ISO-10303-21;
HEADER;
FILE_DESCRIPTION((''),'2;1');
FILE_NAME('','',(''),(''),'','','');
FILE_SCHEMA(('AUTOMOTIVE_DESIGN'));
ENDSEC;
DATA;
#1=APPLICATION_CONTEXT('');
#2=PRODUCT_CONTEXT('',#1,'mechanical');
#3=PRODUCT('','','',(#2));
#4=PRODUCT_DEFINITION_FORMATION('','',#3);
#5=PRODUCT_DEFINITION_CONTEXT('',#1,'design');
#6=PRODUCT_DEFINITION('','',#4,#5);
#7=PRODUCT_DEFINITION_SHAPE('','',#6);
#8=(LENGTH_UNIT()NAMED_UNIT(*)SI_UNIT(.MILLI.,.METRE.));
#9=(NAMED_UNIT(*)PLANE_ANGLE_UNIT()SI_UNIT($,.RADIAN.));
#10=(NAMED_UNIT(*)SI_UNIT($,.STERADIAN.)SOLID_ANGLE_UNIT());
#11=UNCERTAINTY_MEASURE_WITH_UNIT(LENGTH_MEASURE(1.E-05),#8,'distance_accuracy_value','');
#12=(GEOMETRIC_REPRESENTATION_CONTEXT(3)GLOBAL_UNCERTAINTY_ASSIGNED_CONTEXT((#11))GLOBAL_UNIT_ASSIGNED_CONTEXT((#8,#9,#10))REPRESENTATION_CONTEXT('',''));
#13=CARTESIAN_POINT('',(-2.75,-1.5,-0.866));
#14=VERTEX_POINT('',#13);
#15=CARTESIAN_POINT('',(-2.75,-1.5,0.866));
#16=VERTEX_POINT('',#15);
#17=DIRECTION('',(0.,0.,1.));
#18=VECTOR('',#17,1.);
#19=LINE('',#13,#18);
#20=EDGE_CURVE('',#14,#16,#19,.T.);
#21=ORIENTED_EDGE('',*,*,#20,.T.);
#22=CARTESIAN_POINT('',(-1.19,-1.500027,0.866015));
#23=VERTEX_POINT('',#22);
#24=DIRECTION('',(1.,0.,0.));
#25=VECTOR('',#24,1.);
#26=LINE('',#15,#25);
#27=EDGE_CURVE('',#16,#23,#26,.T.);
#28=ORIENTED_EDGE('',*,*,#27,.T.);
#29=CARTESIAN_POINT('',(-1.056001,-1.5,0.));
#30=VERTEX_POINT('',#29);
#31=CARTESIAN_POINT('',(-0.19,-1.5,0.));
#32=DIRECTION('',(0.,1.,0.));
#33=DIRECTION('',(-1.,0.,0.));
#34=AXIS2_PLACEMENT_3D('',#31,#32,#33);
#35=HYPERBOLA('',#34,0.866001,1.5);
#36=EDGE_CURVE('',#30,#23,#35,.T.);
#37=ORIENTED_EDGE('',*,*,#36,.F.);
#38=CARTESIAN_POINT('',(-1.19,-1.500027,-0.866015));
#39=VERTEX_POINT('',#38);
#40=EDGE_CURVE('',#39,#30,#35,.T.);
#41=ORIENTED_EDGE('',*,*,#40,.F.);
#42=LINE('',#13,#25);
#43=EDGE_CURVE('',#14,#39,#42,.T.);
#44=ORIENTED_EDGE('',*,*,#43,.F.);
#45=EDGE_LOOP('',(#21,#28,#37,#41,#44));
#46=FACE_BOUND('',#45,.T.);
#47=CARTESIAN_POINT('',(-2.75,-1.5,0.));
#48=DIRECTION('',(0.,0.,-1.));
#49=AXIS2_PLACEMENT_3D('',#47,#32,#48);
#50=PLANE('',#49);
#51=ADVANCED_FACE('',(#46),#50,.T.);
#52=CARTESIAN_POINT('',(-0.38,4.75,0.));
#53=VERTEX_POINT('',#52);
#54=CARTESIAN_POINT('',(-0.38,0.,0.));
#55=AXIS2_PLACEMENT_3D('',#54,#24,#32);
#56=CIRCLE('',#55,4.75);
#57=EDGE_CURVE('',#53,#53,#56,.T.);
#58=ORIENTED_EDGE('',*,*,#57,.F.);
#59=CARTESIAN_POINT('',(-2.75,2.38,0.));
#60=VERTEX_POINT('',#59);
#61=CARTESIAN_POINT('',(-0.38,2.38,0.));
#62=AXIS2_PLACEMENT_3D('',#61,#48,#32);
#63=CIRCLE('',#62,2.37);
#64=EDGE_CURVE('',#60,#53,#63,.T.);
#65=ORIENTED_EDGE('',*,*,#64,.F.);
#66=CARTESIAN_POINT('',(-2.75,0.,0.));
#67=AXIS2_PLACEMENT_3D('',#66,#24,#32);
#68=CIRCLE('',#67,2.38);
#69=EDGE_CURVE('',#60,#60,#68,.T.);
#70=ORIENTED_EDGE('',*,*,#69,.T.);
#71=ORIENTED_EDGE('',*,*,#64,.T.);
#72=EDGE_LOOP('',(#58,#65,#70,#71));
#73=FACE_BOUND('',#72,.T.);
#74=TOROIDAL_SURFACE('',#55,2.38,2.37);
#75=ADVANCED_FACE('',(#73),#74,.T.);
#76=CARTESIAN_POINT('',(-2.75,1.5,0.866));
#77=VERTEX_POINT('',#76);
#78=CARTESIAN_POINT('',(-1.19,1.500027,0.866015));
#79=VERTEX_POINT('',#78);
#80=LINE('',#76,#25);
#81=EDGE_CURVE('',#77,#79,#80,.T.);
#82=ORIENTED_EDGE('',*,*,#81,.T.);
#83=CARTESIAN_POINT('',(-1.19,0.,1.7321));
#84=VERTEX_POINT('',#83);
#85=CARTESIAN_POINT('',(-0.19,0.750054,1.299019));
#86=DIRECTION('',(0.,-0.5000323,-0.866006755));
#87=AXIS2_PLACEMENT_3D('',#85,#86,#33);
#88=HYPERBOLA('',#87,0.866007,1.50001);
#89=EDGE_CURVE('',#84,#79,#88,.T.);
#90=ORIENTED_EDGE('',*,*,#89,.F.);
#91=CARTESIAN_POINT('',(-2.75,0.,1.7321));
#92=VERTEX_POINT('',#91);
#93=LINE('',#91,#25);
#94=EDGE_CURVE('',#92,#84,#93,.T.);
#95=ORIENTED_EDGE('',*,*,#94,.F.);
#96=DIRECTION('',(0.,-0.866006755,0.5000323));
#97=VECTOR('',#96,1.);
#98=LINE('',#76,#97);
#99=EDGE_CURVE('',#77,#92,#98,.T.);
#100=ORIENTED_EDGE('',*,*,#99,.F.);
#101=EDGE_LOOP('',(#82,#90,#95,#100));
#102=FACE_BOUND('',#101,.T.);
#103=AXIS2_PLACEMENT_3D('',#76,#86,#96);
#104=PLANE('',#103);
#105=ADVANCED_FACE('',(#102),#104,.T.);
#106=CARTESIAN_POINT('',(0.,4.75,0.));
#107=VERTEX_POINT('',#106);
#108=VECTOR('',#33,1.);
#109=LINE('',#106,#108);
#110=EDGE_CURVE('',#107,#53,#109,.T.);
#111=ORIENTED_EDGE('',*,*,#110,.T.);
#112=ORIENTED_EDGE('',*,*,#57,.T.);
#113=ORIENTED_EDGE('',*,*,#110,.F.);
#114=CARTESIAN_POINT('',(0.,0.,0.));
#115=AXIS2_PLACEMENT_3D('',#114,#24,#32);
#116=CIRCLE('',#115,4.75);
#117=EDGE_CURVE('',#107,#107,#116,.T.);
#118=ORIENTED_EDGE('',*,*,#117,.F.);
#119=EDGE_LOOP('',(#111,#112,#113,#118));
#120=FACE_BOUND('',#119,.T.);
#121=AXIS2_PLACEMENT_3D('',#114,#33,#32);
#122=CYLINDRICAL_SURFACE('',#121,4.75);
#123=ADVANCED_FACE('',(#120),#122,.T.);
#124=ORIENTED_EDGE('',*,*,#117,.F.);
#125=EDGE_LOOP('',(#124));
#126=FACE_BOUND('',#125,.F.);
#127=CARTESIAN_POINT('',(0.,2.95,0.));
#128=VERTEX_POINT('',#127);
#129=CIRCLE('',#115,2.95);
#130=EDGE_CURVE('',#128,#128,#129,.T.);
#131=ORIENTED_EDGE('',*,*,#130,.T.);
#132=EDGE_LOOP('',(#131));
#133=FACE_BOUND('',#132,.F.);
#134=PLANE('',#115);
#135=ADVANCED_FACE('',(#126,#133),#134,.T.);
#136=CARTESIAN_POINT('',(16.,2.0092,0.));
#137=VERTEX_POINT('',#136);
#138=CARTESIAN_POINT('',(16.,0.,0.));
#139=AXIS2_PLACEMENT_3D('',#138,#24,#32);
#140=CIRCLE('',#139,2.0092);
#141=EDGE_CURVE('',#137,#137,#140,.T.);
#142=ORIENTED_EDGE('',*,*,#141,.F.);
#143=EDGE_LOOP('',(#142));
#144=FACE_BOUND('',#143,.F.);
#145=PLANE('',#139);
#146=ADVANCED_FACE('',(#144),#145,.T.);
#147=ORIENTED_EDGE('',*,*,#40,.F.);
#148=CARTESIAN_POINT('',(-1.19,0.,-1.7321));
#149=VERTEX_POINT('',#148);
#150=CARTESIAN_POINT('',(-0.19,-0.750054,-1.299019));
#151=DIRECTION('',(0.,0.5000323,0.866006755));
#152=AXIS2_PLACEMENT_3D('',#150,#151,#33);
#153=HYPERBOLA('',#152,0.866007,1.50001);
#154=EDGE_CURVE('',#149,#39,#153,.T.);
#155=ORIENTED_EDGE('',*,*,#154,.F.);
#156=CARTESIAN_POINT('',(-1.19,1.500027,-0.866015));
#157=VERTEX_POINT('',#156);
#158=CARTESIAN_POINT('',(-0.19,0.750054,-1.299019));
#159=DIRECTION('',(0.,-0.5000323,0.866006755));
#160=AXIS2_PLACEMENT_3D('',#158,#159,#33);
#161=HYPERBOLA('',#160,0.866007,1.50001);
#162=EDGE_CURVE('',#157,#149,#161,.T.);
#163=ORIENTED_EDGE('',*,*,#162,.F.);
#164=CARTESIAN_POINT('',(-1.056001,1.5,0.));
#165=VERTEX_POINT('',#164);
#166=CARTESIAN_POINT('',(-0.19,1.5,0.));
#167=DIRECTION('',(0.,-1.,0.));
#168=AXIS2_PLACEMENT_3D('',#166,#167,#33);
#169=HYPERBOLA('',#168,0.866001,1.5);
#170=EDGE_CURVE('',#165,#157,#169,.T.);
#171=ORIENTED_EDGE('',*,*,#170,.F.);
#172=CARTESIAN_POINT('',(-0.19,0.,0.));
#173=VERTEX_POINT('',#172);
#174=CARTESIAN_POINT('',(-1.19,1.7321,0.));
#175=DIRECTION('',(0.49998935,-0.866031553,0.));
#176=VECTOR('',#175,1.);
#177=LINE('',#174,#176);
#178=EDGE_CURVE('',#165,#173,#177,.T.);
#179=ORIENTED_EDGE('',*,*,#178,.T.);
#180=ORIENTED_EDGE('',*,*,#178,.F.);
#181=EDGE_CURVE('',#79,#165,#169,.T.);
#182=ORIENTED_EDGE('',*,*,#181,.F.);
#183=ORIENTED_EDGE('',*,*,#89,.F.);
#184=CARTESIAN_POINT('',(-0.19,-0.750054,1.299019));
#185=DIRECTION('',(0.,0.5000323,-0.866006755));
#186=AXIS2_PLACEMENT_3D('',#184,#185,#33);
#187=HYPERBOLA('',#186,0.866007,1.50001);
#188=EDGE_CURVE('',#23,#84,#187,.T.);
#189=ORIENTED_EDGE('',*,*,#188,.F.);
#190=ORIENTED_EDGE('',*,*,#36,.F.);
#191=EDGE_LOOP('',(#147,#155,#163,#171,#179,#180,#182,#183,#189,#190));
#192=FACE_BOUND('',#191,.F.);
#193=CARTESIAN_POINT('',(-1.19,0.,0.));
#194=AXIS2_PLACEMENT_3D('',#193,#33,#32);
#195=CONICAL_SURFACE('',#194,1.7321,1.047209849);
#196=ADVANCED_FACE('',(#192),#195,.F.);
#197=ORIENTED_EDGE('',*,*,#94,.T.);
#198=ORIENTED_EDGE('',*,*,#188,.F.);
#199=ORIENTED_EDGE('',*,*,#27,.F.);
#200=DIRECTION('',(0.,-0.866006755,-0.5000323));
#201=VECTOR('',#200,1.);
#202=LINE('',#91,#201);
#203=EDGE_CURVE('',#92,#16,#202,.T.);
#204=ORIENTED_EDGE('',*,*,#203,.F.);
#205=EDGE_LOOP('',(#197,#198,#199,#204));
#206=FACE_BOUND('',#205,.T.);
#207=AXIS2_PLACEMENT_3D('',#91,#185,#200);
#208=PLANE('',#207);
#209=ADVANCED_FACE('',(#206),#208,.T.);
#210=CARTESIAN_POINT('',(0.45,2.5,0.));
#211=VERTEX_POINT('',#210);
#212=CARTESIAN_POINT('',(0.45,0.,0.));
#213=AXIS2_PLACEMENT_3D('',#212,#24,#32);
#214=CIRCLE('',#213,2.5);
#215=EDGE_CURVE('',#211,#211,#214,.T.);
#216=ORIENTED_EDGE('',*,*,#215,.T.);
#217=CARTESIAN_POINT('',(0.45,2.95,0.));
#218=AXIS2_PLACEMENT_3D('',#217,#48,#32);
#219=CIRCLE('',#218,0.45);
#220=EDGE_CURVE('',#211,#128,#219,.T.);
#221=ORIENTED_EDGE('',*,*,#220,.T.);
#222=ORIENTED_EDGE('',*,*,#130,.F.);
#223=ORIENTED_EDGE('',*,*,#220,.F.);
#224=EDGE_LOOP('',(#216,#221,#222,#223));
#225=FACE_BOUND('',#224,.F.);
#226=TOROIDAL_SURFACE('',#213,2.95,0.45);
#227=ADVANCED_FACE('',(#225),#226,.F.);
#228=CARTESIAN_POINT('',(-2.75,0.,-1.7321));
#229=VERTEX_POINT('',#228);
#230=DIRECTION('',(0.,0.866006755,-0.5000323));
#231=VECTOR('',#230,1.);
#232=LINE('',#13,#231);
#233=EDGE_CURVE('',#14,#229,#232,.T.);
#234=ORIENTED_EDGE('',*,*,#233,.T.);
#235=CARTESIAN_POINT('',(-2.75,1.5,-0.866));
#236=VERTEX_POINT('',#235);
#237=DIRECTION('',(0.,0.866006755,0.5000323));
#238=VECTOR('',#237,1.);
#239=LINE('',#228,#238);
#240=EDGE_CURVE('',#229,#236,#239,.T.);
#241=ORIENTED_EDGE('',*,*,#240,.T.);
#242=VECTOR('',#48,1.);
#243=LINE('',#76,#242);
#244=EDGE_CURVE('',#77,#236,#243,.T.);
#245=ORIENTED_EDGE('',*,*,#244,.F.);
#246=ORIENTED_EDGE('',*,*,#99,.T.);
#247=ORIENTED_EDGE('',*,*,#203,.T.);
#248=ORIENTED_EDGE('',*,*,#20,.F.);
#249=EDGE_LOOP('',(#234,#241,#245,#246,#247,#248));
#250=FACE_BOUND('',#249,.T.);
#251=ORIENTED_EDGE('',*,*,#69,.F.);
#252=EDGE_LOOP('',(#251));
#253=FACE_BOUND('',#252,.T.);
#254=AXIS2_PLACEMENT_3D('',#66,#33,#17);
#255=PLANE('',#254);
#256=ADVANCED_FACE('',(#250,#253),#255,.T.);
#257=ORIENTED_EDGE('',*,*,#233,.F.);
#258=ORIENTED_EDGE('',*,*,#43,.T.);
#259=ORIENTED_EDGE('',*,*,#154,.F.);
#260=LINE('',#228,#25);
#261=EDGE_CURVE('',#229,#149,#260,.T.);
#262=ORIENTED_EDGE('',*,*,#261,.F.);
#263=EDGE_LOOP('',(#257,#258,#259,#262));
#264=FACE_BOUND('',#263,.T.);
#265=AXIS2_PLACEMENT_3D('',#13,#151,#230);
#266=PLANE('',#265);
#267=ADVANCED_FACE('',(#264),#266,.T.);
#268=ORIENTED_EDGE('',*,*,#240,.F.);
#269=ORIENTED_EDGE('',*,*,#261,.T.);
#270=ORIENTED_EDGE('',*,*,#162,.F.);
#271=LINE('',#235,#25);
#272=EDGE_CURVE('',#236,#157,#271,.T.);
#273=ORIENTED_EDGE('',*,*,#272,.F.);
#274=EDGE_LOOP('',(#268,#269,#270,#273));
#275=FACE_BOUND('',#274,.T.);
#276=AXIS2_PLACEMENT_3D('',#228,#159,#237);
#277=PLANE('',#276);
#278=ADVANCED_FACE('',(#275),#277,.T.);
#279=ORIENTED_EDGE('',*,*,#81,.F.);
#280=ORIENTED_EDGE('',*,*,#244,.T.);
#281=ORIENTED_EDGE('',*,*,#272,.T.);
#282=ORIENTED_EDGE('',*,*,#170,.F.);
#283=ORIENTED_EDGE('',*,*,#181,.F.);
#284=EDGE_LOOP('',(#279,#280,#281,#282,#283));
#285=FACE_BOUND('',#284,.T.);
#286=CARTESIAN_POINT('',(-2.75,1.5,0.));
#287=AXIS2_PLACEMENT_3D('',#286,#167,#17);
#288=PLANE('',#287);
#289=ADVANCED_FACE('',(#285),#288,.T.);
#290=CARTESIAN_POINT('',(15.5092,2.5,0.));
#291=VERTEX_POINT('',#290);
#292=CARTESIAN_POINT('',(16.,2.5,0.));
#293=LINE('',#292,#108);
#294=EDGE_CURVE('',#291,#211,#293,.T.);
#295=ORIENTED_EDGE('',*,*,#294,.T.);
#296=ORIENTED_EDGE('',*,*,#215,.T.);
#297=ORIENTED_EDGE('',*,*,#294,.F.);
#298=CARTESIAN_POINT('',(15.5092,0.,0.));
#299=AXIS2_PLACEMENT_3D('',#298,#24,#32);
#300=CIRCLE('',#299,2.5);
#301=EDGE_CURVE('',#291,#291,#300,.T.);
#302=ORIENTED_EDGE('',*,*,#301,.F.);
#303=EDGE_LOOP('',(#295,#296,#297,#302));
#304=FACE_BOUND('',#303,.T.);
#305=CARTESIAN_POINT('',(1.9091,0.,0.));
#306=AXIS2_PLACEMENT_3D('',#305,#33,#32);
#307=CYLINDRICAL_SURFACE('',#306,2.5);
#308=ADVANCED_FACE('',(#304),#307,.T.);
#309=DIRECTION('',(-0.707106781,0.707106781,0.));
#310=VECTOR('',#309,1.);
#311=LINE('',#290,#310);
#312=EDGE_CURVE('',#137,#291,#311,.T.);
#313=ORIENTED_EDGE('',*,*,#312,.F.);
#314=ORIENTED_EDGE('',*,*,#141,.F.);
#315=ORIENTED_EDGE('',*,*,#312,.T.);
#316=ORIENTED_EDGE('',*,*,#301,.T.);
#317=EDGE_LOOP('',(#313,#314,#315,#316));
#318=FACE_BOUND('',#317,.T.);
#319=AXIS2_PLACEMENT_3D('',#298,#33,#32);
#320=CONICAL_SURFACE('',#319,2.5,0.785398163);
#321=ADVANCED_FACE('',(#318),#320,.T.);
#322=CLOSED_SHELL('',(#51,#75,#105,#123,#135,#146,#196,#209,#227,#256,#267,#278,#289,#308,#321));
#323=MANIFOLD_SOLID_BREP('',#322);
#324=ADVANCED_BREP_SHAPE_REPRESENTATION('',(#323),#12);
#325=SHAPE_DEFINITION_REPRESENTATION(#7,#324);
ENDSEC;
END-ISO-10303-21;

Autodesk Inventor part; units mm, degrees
ref_plane "YZ Plane" through (0, 0, 0) normal (1, 0, 0) x (0, 1, 0)
ref_plane "XZ Plane" through (0, 0, 0) normal (0, 1, 0) x (-1, 0, 0)
sketch "Sketch1" plane through (0, 0, 0) normal (0, 0, 1) x (1, 0, 0)
  line L0 (-0.19, 0) -> (16, 0)
  line L1 (16, 0) -> (16, 2.5)
  line L2 (16, 2.5) -> (2.4, 2.5)
  line L3 (2.4, 2.5) -> (1.9091, 2.5)
  line L4 (1.9091, 2.5) -> (0, 2.5)
  line L5 (0, 2.5) -> (0, 4.75)
  line L6 (0, 4.75) -> (-2.75, 4.75)
  line L7 (-2.75, 4.75) -> (-2.75, 1.7321)
  line L8 (-2.75, 1.7321) -> (-1.19, 1.7321)
  line L9 (-1.19, 1.7321) -> (-0.19, 0)
  line L10 (-6.5, 0) -> (19.75, 0) projected
  line L11 (0, -0.95) -> (0, 5.7) projected
  line L12 (2.4, 2.5) -> (0, 2.5) construction
  dimension "d1" = 13.6
  dimension "d2" = 0.4909
  dimension "d3" = 2.75
  dimension "d4" = 1.56
  dimension "d5" = 60
  dimension "d6" = 5
  dimension "d7" = 5
  dimension "d8" = 3.4641
  dimension "d9" = 9.5
  dimension "d26" = 16
revolve "Body" add sketch "Sketch1" angle 360 about axis through (-0.19, 0, 0) along (1, 0, 0)
sketch "Sketch2" plane through (-2.75, 0, 0) normal (-1, 0, 0) x (0, 0, 1)
  circle A0 centre (0, 0) radius 1.7321 projected
  line L0 (0, -6.65) -> (0, 6.65) projected
  line L1 (-6.65, 0) -> (6.65, 0) projected
  line L2 (1.7321, 0) -> (0.866, -1.5)
  line L3 (0.866, -1.5) -> (-0.866, -1.5)
  line L4 (-0.866, -1.5) -> (-1.7321, 0)
  line L5 (-1.7321, 0) -> (-0.866, 1.5)
  line L6 (-0.866, 1.5) -> (0.866, 1.5)
  line L7 (0.866, 1.5) -> (1.7321, 0)
extrude "Slot" add sketch "Sketch2" against normal up to next contours L7 A0 | A0 L2 | L6 L0 A0 | A0 L0 L3 | L0 L6 A0 | A0 L3 L0 | L4 A0 | A0 L5
fillet "Fillet1" radius 2.37 1 edges at (-2.75, -4.75, 0)
thread "Thread" size "M5x0.8" class "6g" standard "ISO Metric profile" length 13.6
chamfer "Chamfer1" distance 0.4908 distance2 0.4908 1 edges at (16, -2.5, 0) measured on face at (16, -1.1374, -1.1324)
ref_plane "Work Plane1" through (29, 0, 0) normal (0, -1, 0) x (1, 0, 0)
fillet "Fillet2" radius 0.45 1 edges at (0, -2.5, 0)
equation "\"d30\" = R"
equation "\"d17\" = RR"
equation "\"d13\" = GEL"
equation "\"d15\" = -0.5 * SPD + 0.5 * GD"
equation "\"d16\" = GUL"
equation "\"d1\" = GEL"
equation "\"d3\" = KOH"
equation "\"d4\" = INTI"
equation "\"d6\" = GD"
equation "\"d7\" = BDM"
equation "\"d8\" = 1.1547 * SW"
equation "\"d9\" = KOD"
equation "\"d26\" = NLG"
equation "\"GD\" = NND"
equation "\"NLG\" = 16"
equation "\"GEL\" = 13.6"
equation "\"KOD\" = 9.5"
equation "\"KOH\" = 2.75"
equation "\"INTI\" = 1.56"
equation "\"GAL\" = 0.61345 * PTC"
equation "\"GUL\" = 0.61345 * PTC"
equation "\"BDM\" = NND"
equation "\"SW\" = 3"
equation "\"RR\" = 2.37"
equation "\"SPD\" = NND - 1.2269 * PTC"
equation "\"R\" = 0.45"
equation "\"TOA\" = 30deg"
equation "\"GD1\" = THREADDIA - 1.2269 * PTC"
equation "\"THREADDIA\" = 5"
equation "\"PTC\" = 0.8"
equation "\"NND\" = 5"
equation "\"KOH1\" = 0.38"
equation "\"E0\" = 3.443"
properties part number "ISO 7380-1 - M5 x 16" material "Steel"
